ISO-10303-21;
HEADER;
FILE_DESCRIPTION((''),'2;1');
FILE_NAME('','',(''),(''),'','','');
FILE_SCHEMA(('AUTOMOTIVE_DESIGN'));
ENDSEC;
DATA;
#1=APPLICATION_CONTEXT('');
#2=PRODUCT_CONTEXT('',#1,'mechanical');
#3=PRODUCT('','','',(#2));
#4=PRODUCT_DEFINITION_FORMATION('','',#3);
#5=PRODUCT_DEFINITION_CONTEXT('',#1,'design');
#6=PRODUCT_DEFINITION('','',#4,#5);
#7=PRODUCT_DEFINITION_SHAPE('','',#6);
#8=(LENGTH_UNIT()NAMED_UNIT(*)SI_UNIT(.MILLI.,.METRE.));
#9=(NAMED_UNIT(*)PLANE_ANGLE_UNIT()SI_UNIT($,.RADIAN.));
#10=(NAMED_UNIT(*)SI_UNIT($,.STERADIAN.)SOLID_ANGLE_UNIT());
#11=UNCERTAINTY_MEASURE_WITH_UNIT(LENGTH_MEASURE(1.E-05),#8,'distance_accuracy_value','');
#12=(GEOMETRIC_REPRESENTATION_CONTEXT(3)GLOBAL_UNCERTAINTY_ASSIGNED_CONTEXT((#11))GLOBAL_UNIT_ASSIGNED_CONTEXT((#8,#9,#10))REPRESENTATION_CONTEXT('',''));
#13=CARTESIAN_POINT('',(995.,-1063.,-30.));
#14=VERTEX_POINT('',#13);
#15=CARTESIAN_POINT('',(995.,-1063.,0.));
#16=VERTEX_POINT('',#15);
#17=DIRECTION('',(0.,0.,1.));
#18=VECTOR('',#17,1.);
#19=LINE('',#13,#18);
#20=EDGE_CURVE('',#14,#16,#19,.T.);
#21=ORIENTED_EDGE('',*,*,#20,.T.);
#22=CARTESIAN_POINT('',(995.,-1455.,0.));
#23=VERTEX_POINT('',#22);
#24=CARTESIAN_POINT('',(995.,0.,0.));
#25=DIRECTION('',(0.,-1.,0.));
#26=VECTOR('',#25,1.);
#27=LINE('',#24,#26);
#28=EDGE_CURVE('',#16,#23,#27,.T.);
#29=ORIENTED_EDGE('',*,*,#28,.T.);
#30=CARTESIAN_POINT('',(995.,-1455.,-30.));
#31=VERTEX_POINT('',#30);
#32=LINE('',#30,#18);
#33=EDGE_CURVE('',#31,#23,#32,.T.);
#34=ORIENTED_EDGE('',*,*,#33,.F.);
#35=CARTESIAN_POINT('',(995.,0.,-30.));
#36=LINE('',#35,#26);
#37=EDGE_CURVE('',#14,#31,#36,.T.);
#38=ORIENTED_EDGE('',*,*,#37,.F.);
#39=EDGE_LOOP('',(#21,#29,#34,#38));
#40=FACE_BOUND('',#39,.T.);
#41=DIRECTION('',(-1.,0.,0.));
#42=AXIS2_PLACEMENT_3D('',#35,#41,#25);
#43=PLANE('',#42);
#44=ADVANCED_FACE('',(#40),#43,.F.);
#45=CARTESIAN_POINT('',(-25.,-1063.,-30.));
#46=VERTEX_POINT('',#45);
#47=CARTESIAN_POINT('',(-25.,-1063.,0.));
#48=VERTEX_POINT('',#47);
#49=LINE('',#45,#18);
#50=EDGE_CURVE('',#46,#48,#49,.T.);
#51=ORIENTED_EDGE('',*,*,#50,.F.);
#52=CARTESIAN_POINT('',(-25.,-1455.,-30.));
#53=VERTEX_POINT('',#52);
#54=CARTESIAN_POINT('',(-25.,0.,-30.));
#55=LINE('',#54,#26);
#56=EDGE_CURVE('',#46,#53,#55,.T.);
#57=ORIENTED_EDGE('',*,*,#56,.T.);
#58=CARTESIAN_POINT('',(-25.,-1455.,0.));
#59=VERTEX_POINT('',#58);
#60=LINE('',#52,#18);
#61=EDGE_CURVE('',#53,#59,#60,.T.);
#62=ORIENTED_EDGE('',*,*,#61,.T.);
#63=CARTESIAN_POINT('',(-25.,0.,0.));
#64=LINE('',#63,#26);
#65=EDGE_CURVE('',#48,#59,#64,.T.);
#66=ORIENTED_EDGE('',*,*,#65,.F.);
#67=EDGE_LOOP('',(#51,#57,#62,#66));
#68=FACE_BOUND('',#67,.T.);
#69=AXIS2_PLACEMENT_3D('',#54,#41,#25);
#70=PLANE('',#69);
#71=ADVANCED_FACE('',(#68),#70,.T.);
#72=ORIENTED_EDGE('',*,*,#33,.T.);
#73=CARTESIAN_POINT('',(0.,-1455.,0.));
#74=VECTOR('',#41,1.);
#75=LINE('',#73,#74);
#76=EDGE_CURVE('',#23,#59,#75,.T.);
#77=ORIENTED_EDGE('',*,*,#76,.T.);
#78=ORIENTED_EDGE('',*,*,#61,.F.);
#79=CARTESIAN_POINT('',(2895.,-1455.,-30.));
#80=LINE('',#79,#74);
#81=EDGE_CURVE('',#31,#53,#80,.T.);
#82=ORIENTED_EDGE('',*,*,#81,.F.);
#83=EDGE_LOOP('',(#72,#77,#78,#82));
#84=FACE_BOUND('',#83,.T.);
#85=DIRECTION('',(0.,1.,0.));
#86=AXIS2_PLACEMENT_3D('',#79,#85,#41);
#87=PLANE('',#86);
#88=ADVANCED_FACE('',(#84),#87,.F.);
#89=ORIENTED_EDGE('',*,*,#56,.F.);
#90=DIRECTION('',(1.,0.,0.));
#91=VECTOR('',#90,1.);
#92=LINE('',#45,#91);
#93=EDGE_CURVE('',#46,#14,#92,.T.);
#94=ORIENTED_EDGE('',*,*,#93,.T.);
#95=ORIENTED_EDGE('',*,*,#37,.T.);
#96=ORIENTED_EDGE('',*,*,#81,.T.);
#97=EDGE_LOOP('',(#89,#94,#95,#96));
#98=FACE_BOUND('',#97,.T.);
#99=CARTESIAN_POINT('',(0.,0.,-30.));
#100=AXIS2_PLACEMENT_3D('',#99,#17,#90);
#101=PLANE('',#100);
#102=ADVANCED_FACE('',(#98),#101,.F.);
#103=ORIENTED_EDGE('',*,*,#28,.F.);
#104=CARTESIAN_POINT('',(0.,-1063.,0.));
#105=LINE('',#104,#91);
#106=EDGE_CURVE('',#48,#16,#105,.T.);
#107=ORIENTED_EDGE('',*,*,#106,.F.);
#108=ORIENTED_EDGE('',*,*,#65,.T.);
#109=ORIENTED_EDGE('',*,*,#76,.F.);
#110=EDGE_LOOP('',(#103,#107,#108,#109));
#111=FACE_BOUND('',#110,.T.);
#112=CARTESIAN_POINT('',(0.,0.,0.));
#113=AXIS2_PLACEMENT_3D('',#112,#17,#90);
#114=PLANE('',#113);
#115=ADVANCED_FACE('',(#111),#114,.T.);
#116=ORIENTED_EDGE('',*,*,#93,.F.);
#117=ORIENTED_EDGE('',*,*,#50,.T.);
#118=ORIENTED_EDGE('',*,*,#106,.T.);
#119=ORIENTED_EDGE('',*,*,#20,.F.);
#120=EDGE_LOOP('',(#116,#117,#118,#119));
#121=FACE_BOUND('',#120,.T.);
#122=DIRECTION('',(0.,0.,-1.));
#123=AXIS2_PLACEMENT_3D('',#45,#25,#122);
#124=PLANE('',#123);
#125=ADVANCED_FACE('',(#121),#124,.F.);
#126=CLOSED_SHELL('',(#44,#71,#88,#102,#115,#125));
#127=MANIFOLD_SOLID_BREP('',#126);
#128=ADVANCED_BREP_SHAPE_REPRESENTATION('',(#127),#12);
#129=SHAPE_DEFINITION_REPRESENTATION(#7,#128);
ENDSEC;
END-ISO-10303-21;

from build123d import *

# Parameters (mm, degrees)
TABAN_FLAN_1_DEPTH          = 30
KES_EKSTR_ZYON1_DEPTH       = 6331.979387109
KES_EKSTR_ZYON1_DEPTH_BACK  = 6331.979387109
IZIM2_W                     = 3010
IZIM2_H                     = 410
KES_EKSTR_ZYON2_DEPTH       = 6331.979387109
KES_EKSTR_ZYON2_DEPTH_BACK  = 6331.979387109
IZIM3_W                     = 170
IZIM3_H                     = 410
IZIM4_W                     = 25
IZIM4_H                     = 1460
SEKME1_DEPTH                = 30
KES_EKSTR_ZYON3_DEPTH       = 6213.326456329
KES_EKSTR_ZYON3_DEPTH_BACK  = 6213.326456329
IZIM5_W                     = 75
IZIM5_H                     = 150
KES_EKSTR_ZYON4_DEPTH       = 6176.151819996
KES_EKSTR_ZYON4_DEPTH_BACK  = 6176.151819996
IZIM6_W                     = 75
IZIM6_H                     = 90
IZIM6_W_2                   = 5
IZIM6_H_2                   = 645
KES_EKSTR_ZYON5_DEPTH       = 6171.293753137
KES_EKSTR_ZYON5_DEPTH_BACK  = 6171.293753137
IZIM9_W                     = 2920
IZIM9_H                     = 5
IZIM9_W_2                   = 3100
KES_EKSTR_ZYON6_DEPTH       = 6170.112577997
KES_EKSTR_ZYON6_DEPTH_BACK  = 6170.112577997
KES_EKSTR_ZYON7_DEPTH       = 3949.015324185
KES_EKSTR_ZYON7_DEPTH_BACK  = 3949.015324185
KES_EKSTR_ZYON8_DEPTH       = 2269.374969003
KES_EKSTR_ZYON8_DEPTH_BACK  = 2269.374969003
IZIM13_W                    = 523
IZIM13_H                    = 467
KES_EKSTR_ZYON9_DEPTH       = 2269.374969003
KES_EKSTR_ZYON9_DEPTH_BACK  = 2269.374969003
IZIM14_W                    = 740
IZIM14_H                    = 168
KES_EKSTR_ZYON10_DEPTH      = 1763.937888866
KES_EKSTR_ZYON10_DEPTH_BACK = 1763.937888866
IZIM15_W                    = 1020
IZIM15_H                    = 243


# Sheet-metal steps are written as plain solids
with BuildPart() as part:
    # Çizim1 → Taban-Flanş1 (new body)
    with BuildSketch(Plane.XY):
        Polygon((0, 0), (5240, 0), (5240, -90), (6000, -90), (6000, -2020), (0, -2020), align=None)
    extrude(amount=-TABAN_FLAN_1_DEPTH)

    # Çizim2 → Kes-Ekstrüzyon1 (cut, two sides: drawn at the far end of the back side and taken through both)
    with BuildSketch(Plane.XY.offset(-KES_EKSTR_ZYON1_DEPTH_BACK)):
        with Locations((4495, -1815)):
            Rectangle(IZIM2_W, IZIM2_H)
    extrude(amount=KES_EKSTR_ZYON1_DEPTH + KES_EKSTR_ZYON1_DEPTH_BACK, mode=Mode.SUBTRACT)

    # Çizim3 → Kes-Ekstrüzyon2 (cut, two sides: drawn at the far end of the back side and taken through both)
    with BuildSketch(Plane.XY.offset(-KES_EKSTR_ZYON2_DEPTH_BACK)):
        Polygon((0, -1460), (0, -2020), (2820, -2020), (2820, -1610), (2820, -1460), align=None)
        with Locations((2905, -1815)):
            Rectangle(IZIM3_W, IZIM3_H)
    extrude(amount=KES_EKSTR_ZYON2_DEPTH + KES_EKSTR_ZYON2_DEPTH_BACK, mode=Mode.SUBTRACT)

    # Çizim4 → Sekme1 (add)
    with BuildSketch(Plane.XY):
        with Locations((-12.5, -730)):
            Rectangle(IZIM4_W, IZIM4_H)
    extrude(amount=-SEKME1_DEPTH)

    # Çizim5 → Kes-Ekstrüzyon3 (cut, two sides: drawn at the far end of the back side and taken through both)
    with BuildSketch(Plane.XY.offset(-KES_EKSTR_ZYON3_DEPTH_BACK)):
        Polygon((2895, -1610), (6000, -1610), (6000, -1205), (2895, -1205), (2895, -1460), align=None)
        with Locations((2857.5, -1535)):
            Rectangle(IZIM5_W, IZIM5_H)
    extrude(amount=KES_EKSTR_ZYON3_DEPTH + KES_EKSTR_ZYON3_DEPTH_BACK, mode=Mode.SUBTRACT)

    # Çizim6 → Kes-Ekstrüzyon4 (cut, two sides: drawn at the far end of the back side and taken through both)
    with BuildSketch(Plane.XY.offset(-KES_EKSTR_ZYON4_DEPTH_BACK)):
        Polygon((6000, -560), (6000, -90), (5240, -90), (5165, -90), (5165, -560), (5995, -560), align=None)
        with Locations((5202.5, -45)):
            Rectangle(IZIM6_W, IZIM6_H)
        with Locations((5997.5, -882.5)):
            Rectangle(IZIM6_W_2, IZIM6_H_2)
    extrude(amount=KES_EKSTR_ZYON4_DEPTH + KES_EKSTR_ZYON4_DEPTH_BACK, mode=Mode.SUBTRACT)

    # Çizim9 → Kes-Ekstrüzyon5 (cut, two sides: drawn at the far end of the back side and taken through both)
    with BuildSketch(Plane.XY.offset(-KES_EKSTR_ZYON5_DEPTH_BACK)):
        with Locations((1435, -1457.5)):
            Rectangle(IZIM9_W, IZIM9_H)
        with Locations((4445, -1202.5)):
            Rectangle(IZIM9_W_2, IZIM9_H)
    extrude(amount=KES_EKSTR_ZYON5_DEPTH + KES_EKSTR_ZYON5_DEPTH_BACK, mode=Mode.SUBTRACT)

    # Çizim10 → Kes-Ekstrüzyon6 (cut, two sides: drawn at the far end of the back side and taken through both)
    with BuildSketch(Plane.XY.offset(-KES_EKSTR_ZYON6_DEPTH_BACK)):
        Polygon((3670, 0), (3670, -461), (2865, -461), (2865, -1455), (6281.695109379, -1455), (6281.695109379, 0), align=None)
    extrude(amount=KES_EKSTR_ZYON6_DEPTH + KES_EKSTR_ZYON6_DEPTH_BACK, mode=Mode.SUBTRACT)

    # Çizim11 → Kes-Ekstrüzyon7 (cut, two sides: drawn at the far end of the back side and taken through both)
    with BuildSketch(Plane.XY.offset(-KES_EKSTR_ZYON7_DEPTH_BACK)):
        Polygon((1740, 0), (1740, -988), (1523, -988), (1523, -1455), (2865, -1455), (2865, -461), (3670, -461), (3670, 0), align=None)
    extrude(amount=KES_EKSTR_ZYON7_DEPTH + KES_EKSTR_ZYON7_DEPTH_BACK, mode=Mode.SUBTRACT)

    # Çizim13 → Kes-Ekstrüzyon8 (cut, two sides: drawn at the far end of the back side and taken through both)
    with BuildSketch(Plane.XY.offset(-KES_EKSTR_ZYON8_DEPTH_BACK)):
        with Locations((1261.5, -1221.5)):
            Rectangle(IZIM13_W, IZIM13_H)
    extrude(amount=KES_EKSTR_ZYON8_DEPTH + KES_EKSTR_ZYON8_DEPTH_BACK, mode=Mode.SUBTRACT)

    # Çizim14 → Kes-Ekstrüzyon9 (cut, two sides: drawn at the far end of the back side and taken through both)
    with BuildSketch(Plane.XY.offset(-KES_EKSTR_ZYON9_DEPTH_BACK)):
        Polygon((1740, 0), (-25, 0), (-25, -820), (995, -820), (1000, -820), (1740, -820), align=None)
        with Locations((1370, -904)):
            Rectangle(IZIM14_W, IZIM14_H)
        Polygon((1000, -820), (995, -820), (995, -1455), (1000, -1455), (1000, -988), align=None)
    extrude(amount=KES_EKSTR_ZYON9_DEPTH + KES_EKSTR_ZYON9_DEPTH_BACK, mode=Mode.SUBTRACT)

    # Çizim15 → Kes-Ekstrüzyon10 (cut, two sides: drawn at the far end of the back side and taken through both)
    with BuildSketch(Plane.XY.offset(-KES_EKSTR_ZYON10_DEPTH_BACK)):
        with Locations((485, -941.5)):
            Rectangle(IZIM15_W, IZIM15_H)
    extrude(amount=KES_EKSTR_ZYON10_DEPTH + KES_EKSTR_ZYON10_DEPTH_BACK, mode=Mode.SUBTRACT)


solid = part.part
